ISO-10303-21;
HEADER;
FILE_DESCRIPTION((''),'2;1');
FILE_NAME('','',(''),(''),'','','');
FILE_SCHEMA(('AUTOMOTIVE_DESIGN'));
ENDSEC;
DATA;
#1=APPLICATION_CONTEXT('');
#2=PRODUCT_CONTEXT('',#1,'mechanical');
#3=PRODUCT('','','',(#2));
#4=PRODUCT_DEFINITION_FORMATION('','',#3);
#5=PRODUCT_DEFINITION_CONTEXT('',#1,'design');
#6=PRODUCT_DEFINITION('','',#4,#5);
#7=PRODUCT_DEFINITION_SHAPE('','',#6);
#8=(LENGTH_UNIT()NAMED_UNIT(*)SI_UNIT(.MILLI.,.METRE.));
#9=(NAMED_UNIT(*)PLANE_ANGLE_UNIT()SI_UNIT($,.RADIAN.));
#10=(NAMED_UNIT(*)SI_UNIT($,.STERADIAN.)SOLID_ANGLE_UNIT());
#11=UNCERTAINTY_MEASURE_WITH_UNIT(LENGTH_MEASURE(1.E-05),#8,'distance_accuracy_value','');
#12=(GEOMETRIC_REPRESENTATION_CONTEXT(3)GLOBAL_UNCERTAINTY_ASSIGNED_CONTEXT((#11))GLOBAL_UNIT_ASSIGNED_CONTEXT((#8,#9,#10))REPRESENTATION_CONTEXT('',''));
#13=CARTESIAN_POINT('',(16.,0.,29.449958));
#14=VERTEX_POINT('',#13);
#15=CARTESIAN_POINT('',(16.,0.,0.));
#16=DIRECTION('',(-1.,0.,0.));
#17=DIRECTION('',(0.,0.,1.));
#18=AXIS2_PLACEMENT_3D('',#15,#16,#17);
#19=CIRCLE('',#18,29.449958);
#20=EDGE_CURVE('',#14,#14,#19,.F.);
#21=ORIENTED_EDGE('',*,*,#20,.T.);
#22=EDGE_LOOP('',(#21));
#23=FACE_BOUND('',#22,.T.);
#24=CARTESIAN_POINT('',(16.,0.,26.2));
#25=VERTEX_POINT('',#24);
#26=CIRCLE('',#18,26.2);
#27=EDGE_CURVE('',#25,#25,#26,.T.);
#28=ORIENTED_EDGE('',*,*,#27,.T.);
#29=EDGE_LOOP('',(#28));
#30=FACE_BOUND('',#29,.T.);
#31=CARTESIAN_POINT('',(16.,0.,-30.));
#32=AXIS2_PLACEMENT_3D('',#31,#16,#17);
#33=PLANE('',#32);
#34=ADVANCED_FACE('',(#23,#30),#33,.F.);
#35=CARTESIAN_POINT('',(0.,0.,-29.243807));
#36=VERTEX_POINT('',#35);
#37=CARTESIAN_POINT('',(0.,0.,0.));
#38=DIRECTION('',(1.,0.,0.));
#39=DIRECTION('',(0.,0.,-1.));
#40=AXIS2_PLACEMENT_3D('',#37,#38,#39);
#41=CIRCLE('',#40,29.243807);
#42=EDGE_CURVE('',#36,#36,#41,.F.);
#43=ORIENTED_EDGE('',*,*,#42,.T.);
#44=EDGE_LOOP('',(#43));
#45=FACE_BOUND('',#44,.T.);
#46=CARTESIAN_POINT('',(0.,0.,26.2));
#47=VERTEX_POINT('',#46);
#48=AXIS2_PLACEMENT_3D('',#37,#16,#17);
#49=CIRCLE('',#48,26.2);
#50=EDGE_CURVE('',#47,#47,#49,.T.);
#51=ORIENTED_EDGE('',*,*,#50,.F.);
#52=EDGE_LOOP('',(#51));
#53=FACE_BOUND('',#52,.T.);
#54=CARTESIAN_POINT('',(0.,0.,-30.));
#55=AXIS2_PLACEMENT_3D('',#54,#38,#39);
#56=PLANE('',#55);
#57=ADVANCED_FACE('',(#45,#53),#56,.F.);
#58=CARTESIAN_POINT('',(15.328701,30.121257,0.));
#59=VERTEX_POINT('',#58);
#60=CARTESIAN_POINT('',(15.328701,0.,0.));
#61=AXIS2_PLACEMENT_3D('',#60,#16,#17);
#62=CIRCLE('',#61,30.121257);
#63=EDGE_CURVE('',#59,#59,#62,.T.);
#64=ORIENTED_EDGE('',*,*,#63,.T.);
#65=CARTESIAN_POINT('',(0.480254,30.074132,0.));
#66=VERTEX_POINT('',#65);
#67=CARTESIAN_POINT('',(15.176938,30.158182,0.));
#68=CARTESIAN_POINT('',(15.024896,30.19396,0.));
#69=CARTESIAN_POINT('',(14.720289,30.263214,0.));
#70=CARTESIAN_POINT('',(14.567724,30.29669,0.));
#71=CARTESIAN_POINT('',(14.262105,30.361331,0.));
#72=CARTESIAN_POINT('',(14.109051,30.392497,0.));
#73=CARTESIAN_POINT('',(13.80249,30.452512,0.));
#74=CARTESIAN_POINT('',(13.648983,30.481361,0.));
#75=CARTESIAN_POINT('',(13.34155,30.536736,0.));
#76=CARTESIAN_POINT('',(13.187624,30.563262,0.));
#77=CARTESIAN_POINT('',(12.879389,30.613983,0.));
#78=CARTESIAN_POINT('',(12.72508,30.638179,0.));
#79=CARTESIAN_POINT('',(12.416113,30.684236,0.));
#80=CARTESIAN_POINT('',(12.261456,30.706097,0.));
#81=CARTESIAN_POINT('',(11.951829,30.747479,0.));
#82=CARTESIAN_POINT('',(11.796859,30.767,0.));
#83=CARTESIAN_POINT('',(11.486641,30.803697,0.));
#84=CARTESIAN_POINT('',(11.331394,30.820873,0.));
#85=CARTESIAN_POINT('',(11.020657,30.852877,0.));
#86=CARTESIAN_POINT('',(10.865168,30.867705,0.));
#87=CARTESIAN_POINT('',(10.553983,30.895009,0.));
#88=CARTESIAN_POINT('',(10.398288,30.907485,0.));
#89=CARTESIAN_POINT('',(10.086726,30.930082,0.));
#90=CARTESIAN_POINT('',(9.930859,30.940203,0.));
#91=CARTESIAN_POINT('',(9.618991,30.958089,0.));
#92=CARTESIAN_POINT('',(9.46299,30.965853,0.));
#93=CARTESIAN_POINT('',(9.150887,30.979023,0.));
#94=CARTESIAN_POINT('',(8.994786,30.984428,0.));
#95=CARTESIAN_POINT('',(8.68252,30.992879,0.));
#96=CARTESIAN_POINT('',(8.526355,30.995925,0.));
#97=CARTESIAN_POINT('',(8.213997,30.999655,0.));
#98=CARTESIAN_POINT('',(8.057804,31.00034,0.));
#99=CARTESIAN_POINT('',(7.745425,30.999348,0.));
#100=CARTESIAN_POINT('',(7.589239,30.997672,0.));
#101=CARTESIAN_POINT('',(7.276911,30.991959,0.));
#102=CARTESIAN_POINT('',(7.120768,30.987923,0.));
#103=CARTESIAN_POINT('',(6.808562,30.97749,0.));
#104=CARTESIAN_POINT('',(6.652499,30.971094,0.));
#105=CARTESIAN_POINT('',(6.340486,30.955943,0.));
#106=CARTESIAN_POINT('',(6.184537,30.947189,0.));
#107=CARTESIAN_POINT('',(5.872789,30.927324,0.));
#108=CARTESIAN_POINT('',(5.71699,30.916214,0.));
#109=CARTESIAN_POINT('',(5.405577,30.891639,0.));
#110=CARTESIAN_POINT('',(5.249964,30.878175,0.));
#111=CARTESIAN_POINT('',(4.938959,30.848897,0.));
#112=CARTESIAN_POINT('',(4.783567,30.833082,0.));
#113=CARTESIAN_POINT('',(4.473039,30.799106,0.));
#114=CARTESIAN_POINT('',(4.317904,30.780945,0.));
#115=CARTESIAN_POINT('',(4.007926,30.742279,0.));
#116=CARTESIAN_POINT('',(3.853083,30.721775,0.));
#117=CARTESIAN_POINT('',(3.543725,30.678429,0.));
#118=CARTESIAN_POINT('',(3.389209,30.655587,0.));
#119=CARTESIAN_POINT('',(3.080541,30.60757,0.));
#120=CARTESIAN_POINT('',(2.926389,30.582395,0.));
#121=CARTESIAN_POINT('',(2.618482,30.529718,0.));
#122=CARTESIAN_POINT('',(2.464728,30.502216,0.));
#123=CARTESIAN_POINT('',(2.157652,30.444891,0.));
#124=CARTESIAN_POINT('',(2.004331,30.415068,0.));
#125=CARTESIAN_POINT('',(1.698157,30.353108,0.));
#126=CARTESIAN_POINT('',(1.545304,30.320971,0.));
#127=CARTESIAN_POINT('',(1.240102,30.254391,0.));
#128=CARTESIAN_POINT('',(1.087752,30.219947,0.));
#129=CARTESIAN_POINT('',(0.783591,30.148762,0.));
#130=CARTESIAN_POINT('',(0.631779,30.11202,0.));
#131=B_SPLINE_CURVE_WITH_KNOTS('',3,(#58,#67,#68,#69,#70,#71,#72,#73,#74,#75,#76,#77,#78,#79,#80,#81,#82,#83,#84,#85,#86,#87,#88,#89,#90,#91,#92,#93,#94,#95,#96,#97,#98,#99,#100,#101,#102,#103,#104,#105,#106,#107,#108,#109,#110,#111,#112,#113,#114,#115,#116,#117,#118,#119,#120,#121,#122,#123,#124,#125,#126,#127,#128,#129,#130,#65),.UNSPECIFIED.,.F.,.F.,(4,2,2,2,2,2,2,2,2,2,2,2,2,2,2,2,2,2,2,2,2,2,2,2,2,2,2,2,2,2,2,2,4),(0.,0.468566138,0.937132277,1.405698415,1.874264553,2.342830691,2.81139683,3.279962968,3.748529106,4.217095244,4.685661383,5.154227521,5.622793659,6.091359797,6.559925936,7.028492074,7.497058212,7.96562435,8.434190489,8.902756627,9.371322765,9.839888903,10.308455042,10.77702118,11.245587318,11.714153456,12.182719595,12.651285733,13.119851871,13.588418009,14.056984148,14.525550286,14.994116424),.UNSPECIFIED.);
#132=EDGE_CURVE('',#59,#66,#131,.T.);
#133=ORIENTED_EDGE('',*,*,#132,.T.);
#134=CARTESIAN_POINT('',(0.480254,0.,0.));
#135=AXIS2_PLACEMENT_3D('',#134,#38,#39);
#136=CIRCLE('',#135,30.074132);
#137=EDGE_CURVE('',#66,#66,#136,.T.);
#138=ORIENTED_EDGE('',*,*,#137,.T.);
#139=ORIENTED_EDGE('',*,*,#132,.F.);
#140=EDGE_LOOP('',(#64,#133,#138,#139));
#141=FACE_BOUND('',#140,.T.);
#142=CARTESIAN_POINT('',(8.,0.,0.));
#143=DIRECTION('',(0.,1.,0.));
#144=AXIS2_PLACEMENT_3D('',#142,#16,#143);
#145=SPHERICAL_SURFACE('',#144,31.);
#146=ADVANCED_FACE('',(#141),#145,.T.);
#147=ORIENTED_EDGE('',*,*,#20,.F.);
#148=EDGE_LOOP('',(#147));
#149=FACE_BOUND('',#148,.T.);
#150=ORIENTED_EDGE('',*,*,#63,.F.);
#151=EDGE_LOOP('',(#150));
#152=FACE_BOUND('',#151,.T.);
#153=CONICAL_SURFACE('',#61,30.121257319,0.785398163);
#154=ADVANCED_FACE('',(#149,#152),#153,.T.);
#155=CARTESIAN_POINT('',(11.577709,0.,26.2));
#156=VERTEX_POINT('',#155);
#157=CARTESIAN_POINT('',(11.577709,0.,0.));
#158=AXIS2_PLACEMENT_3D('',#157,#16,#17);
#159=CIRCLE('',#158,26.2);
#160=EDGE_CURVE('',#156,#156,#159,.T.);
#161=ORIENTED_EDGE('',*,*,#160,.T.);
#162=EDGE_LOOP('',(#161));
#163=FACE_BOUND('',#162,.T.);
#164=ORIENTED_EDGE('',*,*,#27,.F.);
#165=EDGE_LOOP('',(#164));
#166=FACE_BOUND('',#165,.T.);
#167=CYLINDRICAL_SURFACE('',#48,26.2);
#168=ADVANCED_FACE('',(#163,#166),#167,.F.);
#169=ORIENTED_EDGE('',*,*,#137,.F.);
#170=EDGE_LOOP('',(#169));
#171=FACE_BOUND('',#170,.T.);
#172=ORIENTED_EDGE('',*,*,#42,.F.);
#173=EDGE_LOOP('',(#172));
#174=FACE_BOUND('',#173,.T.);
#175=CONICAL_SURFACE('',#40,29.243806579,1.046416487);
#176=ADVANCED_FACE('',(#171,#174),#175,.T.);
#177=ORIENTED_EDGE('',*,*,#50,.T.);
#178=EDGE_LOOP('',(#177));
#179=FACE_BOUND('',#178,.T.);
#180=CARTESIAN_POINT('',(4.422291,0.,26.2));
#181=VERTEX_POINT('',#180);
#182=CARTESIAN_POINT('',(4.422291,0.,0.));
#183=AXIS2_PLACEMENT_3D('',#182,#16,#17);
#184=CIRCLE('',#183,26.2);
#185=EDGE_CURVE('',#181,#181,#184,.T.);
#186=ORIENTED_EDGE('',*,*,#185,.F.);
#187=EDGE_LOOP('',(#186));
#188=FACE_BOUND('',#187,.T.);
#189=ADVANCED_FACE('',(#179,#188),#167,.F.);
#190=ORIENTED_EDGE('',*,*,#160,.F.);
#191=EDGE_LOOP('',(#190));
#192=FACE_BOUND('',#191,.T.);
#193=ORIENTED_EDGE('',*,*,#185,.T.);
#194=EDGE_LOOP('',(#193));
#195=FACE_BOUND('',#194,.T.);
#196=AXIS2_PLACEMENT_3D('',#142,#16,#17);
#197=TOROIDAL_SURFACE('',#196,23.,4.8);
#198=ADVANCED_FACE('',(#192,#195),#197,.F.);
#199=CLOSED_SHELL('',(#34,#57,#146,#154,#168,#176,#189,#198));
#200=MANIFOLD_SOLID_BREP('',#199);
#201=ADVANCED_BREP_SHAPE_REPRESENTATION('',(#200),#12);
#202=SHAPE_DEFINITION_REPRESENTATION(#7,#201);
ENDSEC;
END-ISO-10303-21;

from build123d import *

# Parameters (mm, degrees)
CHANFREIN1_SIZE   = 0.5
CHANFREIN1_SIZE_2 = 0.706151684


with BuildPart() as part:
    # Esquisse1 → Base-Révolution (revolve)
    with BuildSketch(Plane(origin=(0, 0, 0), x_dir=(1, 0, 0), z_dir=(0, 1, 0)), mode=Mode.PRIVATE) as base_r_volution_sk:
        with BuildLine():
            Line((0, 30), (0, 26.2))
            Line((0, 26.2), (4.422291236, 26.2))
            ThreePointArc((4.422291236, 26.2), (8, 27.8), (11.577708764, 26.2))
            Line((11.577708764, 26.2), (16, 26.2))
            Line((16, 26.2), (16, 30))
            ThreePointArc((16, 30), (15.707106781, 30.707106781), (15, 31))
            Line((15, 31), (1, 31))
            ThreePointArc((1, 31), (0.292893219, 30.707106781), (0, 30))
        make_face()
    revolve(base_r_volution_sk.sketch.rotate(Axis((0, 0, 0), (1, 0, 0)), 180), axis=Axis((0, 0, 0), (1, 0, 0)))

    # Esquisse2 → Enlèvement de matière-Révolution1 (revolve, cut)
    with BuildSketch(Plane.XY):
        with BuildLine():
            Line((0, 29.949958264), (0, 39.553831479))
            Line((0, 39.553831479), (16, 39.553831479))
            Line((16, 39.553831479), (16, 29.949958264))
            ThreePointArc((16, 29.949958264), (8, 31), (0, 29.949958264))
        make_face()
    revolve(axis=Axis((0, 0, 0), (1, 0, 0)), mode=Mode.SUBTRACT)

    # Chanfrein1
    # the kernel refuses this chamfer: 0.706151684, 0.5 mm, written as the material it takes off along each edge
    with BuildSketch(Plane(origin=(16, 0, 0), x_dir=(0, 1, 0), z_dir=(0, 0, -1))) as chanfrein1_piece_1:
        with BuildLine():
            Line((29.949958264 - CHANFREIN1_SIZE, 0), (30.121257319, -0.671299055))
            ThreePointArc((30.121257319, -0.671299055), (30.040483401, -0.34693806), (29.949958264, 0))
            Line((29.949958264, 0), (29.949958264 - CHANFREIN1_SIZE, 0))
        make_face()
    revolve(axis=Axis((16, 0, 0), (1, 0, 0)), mode=Mode.SUBTRACT)
    with BuildSketch(Plane(origin=(0, 0, 0), x_dir=(0, 1, 0), z_dir=(0, 0, -1))) as chanfrein1_piece_2:
        with BuildLine():
            Line((29.949958264 - CHANFREIN1_SIZE_2, 0), (30.074132004, 0.480253714))
            ThreePointArc((30.074132004, 0.480253714), (30.015483294, 0.249466944), (29.949958264, 0))
            Line((29.949958264, 0), (29.949958264 - CHANFREIN1_SIZE_2, 0))
        make_face()
    revolve(axis=Axis((0, 0, 0), (1, 0, 0)), mode=Mode.SUBTRACT)


solid = part.part
